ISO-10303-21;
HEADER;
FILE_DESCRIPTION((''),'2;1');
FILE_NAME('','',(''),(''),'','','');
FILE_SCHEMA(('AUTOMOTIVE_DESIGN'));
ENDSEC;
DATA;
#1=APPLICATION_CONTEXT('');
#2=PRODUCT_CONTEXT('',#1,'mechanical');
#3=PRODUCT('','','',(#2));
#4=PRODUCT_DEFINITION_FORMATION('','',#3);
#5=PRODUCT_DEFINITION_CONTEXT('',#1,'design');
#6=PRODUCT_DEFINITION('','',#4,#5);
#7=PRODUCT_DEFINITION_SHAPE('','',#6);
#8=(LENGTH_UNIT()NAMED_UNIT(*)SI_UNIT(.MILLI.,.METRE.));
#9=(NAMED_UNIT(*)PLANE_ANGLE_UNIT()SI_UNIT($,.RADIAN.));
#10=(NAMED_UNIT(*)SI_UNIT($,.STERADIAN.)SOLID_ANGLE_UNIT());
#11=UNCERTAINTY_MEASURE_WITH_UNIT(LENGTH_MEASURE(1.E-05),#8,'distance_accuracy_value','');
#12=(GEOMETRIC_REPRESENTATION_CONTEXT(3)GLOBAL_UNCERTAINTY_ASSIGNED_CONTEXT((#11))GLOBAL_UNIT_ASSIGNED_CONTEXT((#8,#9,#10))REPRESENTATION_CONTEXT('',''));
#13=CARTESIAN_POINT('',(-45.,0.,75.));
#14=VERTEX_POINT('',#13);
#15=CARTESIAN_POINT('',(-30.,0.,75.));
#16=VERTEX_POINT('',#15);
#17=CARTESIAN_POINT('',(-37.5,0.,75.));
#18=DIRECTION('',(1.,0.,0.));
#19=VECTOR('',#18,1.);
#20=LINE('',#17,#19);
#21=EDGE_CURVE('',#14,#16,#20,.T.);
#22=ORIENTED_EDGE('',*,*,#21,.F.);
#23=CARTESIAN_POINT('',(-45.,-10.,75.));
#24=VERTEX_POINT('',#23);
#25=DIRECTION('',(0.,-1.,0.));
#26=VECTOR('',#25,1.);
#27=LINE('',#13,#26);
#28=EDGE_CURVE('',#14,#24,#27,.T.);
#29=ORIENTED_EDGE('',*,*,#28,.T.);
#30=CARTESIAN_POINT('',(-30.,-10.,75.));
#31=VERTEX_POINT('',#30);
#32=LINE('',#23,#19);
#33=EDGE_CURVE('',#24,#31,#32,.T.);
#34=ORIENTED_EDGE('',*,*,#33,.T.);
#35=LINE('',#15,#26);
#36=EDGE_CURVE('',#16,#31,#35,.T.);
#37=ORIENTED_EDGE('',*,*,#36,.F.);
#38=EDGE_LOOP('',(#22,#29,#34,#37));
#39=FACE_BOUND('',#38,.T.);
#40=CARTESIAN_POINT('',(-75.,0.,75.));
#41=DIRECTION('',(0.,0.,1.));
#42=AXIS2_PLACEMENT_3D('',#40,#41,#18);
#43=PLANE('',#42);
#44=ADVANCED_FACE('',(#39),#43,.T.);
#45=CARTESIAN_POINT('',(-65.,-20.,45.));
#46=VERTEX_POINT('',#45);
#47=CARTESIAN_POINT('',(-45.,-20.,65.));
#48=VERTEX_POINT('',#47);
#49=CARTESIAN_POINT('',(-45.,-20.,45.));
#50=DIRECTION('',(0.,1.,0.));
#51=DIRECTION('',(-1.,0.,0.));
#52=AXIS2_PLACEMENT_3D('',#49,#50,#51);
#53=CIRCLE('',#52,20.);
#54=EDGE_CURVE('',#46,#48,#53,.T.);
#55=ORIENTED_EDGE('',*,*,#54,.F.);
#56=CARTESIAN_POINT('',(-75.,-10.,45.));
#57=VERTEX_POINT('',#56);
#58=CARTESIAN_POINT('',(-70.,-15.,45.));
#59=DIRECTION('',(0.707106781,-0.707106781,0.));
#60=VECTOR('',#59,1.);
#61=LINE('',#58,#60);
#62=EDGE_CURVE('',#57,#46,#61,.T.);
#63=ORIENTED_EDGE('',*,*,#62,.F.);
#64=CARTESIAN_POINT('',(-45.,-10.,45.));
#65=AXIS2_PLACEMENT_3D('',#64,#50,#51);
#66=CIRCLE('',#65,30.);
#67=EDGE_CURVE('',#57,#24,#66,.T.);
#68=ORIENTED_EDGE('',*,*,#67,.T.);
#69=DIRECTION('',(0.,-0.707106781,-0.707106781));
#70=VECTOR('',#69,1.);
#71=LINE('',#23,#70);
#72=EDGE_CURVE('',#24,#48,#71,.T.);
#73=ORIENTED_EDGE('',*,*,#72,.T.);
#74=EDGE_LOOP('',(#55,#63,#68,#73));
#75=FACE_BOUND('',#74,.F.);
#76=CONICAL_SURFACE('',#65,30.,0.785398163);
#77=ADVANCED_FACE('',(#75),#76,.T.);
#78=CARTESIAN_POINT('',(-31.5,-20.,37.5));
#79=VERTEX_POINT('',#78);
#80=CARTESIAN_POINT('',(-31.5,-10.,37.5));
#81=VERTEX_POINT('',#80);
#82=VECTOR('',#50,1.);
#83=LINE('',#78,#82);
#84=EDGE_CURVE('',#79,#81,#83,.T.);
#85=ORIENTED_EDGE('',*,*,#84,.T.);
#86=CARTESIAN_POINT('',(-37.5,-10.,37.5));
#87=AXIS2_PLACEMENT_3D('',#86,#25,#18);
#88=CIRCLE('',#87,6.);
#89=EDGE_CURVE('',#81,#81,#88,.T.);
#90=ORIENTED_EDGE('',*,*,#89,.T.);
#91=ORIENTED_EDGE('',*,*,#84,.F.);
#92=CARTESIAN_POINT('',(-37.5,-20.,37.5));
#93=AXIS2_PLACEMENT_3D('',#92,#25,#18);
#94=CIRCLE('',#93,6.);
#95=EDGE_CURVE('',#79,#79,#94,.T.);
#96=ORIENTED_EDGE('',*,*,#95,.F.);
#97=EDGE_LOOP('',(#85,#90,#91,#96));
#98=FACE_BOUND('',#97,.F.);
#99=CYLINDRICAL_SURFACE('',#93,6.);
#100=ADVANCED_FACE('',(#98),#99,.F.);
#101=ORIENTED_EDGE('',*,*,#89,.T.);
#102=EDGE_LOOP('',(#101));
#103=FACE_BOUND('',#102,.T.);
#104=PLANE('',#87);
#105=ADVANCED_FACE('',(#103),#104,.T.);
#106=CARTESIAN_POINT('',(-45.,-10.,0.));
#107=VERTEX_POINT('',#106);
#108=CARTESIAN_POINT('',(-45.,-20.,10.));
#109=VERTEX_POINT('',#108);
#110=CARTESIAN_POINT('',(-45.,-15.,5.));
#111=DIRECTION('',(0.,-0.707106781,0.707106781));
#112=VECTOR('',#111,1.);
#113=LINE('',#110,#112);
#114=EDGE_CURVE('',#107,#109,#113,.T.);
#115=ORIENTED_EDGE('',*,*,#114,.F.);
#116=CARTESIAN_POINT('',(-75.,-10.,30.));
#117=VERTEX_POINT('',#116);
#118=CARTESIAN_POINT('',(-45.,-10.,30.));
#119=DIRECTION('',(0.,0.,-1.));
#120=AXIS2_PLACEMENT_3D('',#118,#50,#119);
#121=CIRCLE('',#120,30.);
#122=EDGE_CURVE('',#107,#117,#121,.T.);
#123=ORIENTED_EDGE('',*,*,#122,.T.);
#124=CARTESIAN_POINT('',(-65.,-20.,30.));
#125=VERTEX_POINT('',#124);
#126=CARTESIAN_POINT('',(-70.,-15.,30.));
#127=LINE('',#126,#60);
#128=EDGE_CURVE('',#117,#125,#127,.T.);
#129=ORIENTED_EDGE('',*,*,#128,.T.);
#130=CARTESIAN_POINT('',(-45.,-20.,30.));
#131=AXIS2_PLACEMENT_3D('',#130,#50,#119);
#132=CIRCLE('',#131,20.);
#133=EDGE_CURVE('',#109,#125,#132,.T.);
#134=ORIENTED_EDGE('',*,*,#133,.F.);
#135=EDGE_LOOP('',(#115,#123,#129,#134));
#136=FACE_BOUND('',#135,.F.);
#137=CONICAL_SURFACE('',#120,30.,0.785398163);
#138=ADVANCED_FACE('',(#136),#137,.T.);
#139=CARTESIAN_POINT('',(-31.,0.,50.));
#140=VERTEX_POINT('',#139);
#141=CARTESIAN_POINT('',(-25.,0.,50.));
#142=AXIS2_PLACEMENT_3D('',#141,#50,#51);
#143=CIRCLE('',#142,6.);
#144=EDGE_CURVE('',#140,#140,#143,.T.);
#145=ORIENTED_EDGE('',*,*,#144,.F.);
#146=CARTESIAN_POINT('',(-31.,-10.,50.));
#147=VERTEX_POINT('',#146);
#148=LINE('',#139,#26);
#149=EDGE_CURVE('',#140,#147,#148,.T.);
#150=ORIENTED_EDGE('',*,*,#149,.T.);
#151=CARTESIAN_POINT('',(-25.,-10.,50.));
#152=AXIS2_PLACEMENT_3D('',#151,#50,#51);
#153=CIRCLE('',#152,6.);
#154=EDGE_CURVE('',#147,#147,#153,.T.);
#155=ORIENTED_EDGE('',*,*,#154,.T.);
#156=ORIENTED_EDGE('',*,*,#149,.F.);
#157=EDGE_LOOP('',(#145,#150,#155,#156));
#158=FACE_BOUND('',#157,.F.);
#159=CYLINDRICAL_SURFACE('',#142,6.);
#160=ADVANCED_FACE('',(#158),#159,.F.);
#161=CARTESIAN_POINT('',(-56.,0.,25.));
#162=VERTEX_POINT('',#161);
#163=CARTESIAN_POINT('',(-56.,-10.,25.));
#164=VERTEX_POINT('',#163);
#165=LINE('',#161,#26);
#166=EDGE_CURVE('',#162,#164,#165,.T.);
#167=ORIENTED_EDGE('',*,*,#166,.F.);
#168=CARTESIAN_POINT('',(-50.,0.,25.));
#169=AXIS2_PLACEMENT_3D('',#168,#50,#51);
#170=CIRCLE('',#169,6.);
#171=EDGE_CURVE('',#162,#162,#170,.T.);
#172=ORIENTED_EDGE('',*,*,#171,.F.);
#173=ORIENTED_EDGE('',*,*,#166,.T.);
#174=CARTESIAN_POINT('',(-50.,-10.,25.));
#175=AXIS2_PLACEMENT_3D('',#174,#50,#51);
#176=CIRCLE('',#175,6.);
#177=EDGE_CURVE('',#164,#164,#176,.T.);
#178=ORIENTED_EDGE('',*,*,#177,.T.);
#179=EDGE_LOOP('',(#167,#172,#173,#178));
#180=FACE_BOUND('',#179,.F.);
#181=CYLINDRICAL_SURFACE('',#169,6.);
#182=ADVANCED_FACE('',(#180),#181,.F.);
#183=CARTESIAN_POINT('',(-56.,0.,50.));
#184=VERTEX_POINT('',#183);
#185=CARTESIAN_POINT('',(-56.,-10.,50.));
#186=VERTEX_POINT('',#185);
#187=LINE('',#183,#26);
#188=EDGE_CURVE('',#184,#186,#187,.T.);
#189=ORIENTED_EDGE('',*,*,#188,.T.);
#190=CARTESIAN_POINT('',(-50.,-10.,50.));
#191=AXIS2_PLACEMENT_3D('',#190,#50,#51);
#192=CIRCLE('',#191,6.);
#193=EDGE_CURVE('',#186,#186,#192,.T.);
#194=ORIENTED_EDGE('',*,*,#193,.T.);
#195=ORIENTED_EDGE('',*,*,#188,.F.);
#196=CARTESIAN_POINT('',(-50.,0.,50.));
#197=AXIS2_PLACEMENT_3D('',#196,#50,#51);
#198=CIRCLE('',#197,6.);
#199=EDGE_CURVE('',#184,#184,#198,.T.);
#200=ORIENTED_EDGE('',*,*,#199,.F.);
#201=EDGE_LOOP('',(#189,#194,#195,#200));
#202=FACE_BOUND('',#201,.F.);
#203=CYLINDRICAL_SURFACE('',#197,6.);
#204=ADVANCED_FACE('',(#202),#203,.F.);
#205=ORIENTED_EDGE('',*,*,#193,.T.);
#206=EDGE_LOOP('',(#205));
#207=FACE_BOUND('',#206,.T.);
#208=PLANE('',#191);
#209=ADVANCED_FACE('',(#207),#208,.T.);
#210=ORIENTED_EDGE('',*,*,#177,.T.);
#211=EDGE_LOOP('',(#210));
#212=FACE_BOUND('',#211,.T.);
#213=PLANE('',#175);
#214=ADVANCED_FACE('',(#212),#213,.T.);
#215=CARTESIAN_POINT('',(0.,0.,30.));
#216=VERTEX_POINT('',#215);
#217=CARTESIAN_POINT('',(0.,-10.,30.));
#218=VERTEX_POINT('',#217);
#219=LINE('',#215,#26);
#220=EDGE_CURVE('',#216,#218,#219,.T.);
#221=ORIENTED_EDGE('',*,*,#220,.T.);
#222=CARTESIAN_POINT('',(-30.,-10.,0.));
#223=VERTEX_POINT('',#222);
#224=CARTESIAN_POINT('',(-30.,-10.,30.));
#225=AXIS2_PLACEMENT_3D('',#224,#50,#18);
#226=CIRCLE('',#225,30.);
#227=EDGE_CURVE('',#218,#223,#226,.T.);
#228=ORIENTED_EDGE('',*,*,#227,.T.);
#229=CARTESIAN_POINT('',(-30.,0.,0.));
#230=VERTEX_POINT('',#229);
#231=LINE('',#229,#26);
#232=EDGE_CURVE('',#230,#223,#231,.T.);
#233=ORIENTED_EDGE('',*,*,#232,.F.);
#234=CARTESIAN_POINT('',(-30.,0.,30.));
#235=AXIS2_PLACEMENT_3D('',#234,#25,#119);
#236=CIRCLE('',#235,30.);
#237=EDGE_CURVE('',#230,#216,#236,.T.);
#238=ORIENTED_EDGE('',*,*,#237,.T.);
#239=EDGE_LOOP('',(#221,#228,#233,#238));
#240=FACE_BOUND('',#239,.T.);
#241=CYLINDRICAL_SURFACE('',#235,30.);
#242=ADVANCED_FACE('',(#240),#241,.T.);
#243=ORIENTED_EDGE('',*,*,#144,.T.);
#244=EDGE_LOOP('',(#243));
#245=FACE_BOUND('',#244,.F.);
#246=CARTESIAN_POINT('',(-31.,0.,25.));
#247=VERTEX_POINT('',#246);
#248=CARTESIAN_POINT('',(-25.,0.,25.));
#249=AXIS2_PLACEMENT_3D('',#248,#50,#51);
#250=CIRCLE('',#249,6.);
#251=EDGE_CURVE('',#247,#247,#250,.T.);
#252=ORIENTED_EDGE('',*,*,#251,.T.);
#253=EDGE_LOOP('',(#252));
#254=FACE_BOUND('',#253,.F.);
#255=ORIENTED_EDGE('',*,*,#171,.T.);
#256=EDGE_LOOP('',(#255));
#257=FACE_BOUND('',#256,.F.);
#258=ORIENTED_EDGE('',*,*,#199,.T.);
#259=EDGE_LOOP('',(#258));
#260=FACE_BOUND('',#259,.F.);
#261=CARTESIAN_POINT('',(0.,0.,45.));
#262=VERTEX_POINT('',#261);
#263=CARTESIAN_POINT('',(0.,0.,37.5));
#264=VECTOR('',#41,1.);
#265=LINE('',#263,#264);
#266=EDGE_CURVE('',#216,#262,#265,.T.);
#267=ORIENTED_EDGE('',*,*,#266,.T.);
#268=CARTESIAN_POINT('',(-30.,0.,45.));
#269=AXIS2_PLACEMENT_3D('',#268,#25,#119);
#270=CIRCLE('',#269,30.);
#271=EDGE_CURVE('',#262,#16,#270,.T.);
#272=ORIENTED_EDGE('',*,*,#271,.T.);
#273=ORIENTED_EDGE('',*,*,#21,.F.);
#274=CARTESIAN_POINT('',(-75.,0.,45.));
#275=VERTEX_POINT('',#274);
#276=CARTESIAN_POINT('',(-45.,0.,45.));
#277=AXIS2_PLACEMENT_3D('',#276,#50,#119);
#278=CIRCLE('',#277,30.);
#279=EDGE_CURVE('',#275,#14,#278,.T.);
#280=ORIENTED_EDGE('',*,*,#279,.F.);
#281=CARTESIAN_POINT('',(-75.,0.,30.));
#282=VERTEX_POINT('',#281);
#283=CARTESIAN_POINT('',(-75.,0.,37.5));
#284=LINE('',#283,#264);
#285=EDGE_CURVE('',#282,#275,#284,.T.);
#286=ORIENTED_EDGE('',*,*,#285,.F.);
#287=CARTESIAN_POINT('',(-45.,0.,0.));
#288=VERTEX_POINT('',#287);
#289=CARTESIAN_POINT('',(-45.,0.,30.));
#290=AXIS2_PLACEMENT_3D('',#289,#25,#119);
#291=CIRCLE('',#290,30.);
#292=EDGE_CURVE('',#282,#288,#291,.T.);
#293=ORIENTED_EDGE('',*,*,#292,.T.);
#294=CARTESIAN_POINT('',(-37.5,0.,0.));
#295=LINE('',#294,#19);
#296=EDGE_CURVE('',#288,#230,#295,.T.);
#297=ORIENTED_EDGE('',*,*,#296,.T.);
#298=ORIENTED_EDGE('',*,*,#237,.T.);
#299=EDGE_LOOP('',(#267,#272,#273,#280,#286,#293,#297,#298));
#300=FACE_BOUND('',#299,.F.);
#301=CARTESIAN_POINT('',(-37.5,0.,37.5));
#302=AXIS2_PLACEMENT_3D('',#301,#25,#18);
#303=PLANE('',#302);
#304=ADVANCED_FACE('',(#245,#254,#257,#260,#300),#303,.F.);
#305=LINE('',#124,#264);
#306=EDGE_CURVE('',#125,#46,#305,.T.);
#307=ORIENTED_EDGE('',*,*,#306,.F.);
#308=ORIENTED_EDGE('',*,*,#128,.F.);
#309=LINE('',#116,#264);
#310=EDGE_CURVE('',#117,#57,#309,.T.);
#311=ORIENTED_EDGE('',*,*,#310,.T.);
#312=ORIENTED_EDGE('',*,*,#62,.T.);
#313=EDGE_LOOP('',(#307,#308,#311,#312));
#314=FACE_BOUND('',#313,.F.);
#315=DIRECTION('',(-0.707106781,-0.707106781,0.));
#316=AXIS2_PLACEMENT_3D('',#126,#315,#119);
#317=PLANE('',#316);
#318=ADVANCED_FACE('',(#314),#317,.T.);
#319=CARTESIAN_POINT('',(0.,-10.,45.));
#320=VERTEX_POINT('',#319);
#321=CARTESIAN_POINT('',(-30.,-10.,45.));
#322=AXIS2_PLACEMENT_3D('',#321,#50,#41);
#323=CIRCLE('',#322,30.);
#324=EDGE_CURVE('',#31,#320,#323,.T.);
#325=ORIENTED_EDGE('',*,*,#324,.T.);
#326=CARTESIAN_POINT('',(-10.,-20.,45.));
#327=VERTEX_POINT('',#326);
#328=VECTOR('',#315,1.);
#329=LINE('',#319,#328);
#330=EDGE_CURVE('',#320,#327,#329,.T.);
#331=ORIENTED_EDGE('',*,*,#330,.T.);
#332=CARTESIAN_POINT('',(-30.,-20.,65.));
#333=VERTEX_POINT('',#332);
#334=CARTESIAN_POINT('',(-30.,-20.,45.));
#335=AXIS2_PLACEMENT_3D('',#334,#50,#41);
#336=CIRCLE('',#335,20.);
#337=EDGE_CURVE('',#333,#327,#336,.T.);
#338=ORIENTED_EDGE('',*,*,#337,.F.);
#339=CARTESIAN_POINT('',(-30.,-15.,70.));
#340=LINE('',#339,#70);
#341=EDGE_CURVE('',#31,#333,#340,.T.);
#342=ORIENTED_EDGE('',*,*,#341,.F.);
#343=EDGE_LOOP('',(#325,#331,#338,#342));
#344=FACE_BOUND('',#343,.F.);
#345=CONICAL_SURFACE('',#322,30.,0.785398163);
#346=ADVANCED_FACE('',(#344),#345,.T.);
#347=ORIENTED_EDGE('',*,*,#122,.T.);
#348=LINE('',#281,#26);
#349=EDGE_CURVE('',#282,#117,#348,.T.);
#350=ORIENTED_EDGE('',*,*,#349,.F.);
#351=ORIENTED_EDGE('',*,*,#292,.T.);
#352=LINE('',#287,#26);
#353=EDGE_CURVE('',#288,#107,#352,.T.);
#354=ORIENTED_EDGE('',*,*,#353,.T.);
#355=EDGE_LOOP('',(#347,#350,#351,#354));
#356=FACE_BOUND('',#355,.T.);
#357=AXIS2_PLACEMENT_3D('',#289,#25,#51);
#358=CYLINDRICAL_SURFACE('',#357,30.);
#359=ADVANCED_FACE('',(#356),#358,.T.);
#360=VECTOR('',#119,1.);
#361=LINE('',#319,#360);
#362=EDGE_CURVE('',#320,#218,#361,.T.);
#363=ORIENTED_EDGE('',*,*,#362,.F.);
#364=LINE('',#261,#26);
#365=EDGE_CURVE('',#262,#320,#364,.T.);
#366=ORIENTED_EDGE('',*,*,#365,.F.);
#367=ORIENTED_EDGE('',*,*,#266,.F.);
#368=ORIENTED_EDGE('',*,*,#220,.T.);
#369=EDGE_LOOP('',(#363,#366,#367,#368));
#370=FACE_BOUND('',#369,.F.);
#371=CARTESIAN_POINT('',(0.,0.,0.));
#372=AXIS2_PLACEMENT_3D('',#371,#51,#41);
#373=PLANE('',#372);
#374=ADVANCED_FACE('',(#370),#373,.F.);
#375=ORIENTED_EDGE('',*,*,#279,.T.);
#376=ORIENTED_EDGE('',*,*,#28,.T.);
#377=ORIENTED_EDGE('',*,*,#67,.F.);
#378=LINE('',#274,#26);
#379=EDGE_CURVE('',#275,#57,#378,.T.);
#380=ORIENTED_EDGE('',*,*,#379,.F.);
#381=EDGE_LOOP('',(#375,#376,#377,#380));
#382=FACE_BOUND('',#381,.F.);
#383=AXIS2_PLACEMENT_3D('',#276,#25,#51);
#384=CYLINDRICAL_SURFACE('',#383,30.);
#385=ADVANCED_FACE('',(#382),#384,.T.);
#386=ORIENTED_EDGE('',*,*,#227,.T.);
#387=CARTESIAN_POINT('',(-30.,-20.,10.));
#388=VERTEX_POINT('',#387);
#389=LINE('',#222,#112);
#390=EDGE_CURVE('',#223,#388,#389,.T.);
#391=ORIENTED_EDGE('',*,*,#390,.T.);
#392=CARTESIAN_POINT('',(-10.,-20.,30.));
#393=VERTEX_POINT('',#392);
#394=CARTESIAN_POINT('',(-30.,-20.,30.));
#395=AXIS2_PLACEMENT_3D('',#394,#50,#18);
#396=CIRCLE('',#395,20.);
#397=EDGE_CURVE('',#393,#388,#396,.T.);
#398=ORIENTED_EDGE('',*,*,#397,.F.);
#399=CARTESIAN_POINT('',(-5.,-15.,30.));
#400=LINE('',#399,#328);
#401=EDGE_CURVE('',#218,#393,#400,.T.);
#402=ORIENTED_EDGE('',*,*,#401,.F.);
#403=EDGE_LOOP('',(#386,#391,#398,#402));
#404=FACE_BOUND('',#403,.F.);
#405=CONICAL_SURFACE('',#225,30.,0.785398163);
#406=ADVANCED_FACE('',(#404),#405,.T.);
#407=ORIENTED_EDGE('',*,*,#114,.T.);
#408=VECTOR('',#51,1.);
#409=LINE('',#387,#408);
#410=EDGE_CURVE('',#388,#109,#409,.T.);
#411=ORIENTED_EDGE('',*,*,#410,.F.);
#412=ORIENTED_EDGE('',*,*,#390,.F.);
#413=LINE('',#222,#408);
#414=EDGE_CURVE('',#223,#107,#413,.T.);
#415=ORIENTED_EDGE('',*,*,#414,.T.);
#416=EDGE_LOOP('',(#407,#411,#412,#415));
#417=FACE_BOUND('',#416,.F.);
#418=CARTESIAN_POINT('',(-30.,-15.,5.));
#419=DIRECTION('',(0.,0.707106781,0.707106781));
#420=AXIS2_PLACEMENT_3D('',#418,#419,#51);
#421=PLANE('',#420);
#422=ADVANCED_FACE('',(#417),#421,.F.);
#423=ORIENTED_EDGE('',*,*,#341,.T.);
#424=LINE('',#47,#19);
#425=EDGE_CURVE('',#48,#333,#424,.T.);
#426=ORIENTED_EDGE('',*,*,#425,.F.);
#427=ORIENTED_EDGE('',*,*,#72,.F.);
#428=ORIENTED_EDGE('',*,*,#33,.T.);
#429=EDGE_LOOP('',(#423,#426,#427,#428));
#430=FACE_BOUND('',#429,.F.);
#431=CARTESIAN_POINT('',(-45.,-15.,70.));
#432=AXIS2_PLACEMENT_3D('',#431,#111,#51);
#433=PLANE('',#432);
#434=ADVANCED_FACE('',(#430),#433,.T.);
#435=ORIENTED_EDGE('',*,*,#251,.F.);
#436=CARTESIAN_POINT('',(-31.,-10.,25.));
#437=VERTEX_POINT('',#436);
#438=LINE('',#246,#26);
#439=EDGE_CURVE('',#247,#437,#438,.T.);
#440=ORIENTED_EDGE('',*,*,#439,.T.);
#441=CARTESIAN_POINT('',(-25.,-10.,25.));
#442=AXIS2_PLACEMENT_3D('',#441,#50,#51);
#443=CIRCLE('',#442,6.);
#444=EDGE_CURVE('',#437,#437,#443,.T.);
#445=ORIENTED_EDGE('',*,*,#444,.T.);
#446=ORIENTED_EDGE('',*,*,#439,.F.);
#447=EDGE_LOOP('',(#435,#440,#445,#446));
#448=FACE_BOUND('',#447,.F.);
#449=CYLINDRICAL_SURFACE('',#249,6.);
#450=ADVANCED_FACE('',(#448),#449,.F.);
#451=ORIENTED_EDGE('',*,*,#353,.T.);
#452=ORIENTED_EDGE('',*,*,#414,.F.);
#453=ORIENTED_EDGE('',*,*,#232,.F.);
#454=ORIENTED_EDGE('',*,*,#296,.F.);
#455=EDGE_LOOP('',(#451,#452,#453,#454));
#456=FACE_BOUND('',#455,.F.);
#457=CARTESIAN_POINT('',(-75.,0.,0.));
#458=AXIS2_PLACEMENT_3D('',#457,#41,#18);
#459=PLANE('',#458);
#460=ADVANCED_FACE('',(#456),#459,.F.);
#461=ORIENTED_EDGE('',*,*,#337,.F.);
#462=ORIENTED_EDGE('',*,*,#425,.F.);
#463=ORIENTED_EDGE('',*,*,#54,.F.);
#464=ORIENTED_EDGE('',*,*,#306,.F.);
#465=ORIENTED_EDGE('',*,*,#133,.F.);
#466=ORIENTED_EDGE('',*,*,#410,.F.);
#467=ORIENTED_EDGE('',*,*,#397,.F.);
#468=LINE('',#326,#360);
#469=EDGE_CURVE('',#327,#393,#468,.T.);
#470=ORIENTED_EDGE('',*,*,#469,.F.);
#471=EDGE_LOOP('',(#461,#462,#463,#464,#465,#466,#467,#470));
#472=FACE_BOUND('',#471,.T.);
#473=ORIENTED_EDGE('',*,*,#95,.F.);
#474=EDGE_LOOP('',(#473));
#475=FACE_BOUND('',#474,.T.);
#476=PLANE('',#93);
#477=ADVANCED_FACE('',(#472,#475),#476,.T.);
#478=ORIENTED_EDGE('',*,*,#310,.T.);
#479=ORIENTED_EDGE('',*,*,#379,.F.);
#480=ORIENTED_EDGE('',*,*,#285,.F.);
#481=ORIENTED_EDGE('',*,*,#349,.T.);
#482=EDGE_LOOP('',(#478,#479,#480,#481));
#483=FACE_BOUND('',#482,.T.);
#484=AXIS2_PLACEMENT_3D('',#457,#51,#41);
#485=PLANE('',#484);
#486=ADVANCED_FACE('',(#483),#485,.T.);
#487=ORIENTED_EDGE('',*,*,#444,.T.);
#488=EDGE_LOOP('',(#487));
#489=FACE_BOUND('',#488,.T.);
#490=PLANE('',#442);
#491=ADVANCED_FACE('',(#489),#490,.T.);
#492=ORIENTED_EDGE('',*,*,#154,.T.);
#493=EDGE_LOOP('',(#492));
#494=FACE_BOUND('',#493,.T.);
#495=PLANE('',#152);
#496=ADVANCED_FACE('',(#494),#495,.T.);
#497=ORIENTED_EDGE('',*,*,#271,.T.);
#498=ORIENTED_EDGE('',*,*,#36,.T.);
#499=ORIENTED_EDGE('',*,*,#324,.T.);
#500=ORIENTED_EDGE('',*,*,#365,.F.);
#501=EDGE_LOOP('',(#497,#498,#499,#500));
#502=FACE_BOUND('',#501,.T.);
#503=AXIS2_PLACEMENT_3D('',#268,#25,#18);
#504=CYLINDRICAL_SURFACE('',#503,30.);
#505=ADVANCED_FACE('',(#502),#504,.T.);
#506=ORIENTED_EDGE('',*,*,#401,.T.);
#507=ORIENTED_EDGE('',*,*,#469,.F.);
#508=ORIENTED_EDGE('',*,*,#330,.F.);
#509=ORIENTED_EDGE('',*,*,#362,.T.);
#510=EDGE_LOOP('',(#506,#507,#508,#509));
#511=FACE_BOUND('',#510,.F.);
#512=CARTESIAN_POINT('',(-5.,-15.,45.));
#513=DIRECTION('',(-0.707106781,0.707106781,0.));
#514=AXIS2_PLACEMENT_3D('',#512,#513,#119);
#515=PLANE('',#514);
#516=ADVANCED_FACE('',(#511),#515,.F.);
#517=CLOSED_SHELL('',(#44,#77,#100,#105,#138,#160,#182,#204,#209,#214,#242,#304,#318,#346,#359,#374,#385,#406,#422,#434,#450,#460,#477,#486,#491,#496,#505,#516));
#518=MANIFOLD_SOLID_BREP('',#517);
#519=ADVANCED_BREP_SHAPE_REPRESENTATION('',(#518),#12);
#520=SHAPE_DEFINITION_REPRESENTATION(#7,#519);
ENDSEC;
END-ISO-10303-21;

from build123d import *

# Parameters (mm, degrees)
F0_W     = 75
F0_H     = 75
F1_DEPTH = 20
F2_R     = 30
F5_SIZE  = 10
F3_R     = 6
F4_R     = 6
F6_DEPTH = 10
F7_DEPTH = 10


with BuildPart() as f1:
    # F0 (on Front) → F1 (new body)
    with BuildSketch(Plane.XZ):
        with Locations((-37.5, 37.5)):
            Rectangle(F0_W, F0_H)
    extrude(amount=F1_DEPTH)

    # F2
    f2_edges = [f1.edges().sort_by_distance(p)[0] for p in [
        (-75, -10, 0),
        (0, -10, 0),
        (0, -10, 75),
        (-75, -10, 75),
    ]]
    fillet(f2_edges, radius=F2_R)

    # F5
    f5_edges = [f1.edges().sort_by_distance(p)[0] for p in [
        (-75, -20, 37.5),
        (-37.5, -20, 0),
        (-66.213203, -20, 8.786797),
        (-8.786797, -20, 8.786797),
        (0, -20, 37.5),
        (-66.213203, -20, 66.213203),
        (-8.786797, -20, 66.213203),
        (-37.5, -20, 75),
    ]]
    chamfer(f5_edges, length=F5_SIZE)

    # F3 (on face) + F4 (on face) → F6 (cut)
    with BuildSketch(Plane.XZ.offset(20)):
        with Locations((-37.5, 37.5)):
            Circle(F3_R)
    with BuildSketch(Plane(origin=(0, 0, 0), x_dir=(-1, 0, 0), z_dir=(0, 1, 0))):
        with Locations((50, 25)):
            Circle(F4_R)
        with Locations((25, 25)):
            Circle(F4_R)
        with Locations((25, 50)):
            Circle(F4_R)
        with Locations((50, 50)):
            Circle(F4_R)
    extrude(amount=-F6_DEPTH, dir=(0, -1, 0), mode=Mode.SUBTRACT)

    # F4 (on face) → F7 (cut)
    with BuildSketch(Plane(origin=(0, 0, 0), x_dir=(-1, 0, 0), z_dir=(0, 1, 0))):
        with Locations((25, 50)):
            Circle(F4_R)
        with Locations((50, 50)):
            Circle(F4_R)
        with Locations((50, 25)):
            Circle(F4_R)
        with Locations((25, 25)):
            Circle(F4_R)
    extrude(amount=-F7_DEPTH, mode=Mode.SUBTRACT)


solid = f1.part
